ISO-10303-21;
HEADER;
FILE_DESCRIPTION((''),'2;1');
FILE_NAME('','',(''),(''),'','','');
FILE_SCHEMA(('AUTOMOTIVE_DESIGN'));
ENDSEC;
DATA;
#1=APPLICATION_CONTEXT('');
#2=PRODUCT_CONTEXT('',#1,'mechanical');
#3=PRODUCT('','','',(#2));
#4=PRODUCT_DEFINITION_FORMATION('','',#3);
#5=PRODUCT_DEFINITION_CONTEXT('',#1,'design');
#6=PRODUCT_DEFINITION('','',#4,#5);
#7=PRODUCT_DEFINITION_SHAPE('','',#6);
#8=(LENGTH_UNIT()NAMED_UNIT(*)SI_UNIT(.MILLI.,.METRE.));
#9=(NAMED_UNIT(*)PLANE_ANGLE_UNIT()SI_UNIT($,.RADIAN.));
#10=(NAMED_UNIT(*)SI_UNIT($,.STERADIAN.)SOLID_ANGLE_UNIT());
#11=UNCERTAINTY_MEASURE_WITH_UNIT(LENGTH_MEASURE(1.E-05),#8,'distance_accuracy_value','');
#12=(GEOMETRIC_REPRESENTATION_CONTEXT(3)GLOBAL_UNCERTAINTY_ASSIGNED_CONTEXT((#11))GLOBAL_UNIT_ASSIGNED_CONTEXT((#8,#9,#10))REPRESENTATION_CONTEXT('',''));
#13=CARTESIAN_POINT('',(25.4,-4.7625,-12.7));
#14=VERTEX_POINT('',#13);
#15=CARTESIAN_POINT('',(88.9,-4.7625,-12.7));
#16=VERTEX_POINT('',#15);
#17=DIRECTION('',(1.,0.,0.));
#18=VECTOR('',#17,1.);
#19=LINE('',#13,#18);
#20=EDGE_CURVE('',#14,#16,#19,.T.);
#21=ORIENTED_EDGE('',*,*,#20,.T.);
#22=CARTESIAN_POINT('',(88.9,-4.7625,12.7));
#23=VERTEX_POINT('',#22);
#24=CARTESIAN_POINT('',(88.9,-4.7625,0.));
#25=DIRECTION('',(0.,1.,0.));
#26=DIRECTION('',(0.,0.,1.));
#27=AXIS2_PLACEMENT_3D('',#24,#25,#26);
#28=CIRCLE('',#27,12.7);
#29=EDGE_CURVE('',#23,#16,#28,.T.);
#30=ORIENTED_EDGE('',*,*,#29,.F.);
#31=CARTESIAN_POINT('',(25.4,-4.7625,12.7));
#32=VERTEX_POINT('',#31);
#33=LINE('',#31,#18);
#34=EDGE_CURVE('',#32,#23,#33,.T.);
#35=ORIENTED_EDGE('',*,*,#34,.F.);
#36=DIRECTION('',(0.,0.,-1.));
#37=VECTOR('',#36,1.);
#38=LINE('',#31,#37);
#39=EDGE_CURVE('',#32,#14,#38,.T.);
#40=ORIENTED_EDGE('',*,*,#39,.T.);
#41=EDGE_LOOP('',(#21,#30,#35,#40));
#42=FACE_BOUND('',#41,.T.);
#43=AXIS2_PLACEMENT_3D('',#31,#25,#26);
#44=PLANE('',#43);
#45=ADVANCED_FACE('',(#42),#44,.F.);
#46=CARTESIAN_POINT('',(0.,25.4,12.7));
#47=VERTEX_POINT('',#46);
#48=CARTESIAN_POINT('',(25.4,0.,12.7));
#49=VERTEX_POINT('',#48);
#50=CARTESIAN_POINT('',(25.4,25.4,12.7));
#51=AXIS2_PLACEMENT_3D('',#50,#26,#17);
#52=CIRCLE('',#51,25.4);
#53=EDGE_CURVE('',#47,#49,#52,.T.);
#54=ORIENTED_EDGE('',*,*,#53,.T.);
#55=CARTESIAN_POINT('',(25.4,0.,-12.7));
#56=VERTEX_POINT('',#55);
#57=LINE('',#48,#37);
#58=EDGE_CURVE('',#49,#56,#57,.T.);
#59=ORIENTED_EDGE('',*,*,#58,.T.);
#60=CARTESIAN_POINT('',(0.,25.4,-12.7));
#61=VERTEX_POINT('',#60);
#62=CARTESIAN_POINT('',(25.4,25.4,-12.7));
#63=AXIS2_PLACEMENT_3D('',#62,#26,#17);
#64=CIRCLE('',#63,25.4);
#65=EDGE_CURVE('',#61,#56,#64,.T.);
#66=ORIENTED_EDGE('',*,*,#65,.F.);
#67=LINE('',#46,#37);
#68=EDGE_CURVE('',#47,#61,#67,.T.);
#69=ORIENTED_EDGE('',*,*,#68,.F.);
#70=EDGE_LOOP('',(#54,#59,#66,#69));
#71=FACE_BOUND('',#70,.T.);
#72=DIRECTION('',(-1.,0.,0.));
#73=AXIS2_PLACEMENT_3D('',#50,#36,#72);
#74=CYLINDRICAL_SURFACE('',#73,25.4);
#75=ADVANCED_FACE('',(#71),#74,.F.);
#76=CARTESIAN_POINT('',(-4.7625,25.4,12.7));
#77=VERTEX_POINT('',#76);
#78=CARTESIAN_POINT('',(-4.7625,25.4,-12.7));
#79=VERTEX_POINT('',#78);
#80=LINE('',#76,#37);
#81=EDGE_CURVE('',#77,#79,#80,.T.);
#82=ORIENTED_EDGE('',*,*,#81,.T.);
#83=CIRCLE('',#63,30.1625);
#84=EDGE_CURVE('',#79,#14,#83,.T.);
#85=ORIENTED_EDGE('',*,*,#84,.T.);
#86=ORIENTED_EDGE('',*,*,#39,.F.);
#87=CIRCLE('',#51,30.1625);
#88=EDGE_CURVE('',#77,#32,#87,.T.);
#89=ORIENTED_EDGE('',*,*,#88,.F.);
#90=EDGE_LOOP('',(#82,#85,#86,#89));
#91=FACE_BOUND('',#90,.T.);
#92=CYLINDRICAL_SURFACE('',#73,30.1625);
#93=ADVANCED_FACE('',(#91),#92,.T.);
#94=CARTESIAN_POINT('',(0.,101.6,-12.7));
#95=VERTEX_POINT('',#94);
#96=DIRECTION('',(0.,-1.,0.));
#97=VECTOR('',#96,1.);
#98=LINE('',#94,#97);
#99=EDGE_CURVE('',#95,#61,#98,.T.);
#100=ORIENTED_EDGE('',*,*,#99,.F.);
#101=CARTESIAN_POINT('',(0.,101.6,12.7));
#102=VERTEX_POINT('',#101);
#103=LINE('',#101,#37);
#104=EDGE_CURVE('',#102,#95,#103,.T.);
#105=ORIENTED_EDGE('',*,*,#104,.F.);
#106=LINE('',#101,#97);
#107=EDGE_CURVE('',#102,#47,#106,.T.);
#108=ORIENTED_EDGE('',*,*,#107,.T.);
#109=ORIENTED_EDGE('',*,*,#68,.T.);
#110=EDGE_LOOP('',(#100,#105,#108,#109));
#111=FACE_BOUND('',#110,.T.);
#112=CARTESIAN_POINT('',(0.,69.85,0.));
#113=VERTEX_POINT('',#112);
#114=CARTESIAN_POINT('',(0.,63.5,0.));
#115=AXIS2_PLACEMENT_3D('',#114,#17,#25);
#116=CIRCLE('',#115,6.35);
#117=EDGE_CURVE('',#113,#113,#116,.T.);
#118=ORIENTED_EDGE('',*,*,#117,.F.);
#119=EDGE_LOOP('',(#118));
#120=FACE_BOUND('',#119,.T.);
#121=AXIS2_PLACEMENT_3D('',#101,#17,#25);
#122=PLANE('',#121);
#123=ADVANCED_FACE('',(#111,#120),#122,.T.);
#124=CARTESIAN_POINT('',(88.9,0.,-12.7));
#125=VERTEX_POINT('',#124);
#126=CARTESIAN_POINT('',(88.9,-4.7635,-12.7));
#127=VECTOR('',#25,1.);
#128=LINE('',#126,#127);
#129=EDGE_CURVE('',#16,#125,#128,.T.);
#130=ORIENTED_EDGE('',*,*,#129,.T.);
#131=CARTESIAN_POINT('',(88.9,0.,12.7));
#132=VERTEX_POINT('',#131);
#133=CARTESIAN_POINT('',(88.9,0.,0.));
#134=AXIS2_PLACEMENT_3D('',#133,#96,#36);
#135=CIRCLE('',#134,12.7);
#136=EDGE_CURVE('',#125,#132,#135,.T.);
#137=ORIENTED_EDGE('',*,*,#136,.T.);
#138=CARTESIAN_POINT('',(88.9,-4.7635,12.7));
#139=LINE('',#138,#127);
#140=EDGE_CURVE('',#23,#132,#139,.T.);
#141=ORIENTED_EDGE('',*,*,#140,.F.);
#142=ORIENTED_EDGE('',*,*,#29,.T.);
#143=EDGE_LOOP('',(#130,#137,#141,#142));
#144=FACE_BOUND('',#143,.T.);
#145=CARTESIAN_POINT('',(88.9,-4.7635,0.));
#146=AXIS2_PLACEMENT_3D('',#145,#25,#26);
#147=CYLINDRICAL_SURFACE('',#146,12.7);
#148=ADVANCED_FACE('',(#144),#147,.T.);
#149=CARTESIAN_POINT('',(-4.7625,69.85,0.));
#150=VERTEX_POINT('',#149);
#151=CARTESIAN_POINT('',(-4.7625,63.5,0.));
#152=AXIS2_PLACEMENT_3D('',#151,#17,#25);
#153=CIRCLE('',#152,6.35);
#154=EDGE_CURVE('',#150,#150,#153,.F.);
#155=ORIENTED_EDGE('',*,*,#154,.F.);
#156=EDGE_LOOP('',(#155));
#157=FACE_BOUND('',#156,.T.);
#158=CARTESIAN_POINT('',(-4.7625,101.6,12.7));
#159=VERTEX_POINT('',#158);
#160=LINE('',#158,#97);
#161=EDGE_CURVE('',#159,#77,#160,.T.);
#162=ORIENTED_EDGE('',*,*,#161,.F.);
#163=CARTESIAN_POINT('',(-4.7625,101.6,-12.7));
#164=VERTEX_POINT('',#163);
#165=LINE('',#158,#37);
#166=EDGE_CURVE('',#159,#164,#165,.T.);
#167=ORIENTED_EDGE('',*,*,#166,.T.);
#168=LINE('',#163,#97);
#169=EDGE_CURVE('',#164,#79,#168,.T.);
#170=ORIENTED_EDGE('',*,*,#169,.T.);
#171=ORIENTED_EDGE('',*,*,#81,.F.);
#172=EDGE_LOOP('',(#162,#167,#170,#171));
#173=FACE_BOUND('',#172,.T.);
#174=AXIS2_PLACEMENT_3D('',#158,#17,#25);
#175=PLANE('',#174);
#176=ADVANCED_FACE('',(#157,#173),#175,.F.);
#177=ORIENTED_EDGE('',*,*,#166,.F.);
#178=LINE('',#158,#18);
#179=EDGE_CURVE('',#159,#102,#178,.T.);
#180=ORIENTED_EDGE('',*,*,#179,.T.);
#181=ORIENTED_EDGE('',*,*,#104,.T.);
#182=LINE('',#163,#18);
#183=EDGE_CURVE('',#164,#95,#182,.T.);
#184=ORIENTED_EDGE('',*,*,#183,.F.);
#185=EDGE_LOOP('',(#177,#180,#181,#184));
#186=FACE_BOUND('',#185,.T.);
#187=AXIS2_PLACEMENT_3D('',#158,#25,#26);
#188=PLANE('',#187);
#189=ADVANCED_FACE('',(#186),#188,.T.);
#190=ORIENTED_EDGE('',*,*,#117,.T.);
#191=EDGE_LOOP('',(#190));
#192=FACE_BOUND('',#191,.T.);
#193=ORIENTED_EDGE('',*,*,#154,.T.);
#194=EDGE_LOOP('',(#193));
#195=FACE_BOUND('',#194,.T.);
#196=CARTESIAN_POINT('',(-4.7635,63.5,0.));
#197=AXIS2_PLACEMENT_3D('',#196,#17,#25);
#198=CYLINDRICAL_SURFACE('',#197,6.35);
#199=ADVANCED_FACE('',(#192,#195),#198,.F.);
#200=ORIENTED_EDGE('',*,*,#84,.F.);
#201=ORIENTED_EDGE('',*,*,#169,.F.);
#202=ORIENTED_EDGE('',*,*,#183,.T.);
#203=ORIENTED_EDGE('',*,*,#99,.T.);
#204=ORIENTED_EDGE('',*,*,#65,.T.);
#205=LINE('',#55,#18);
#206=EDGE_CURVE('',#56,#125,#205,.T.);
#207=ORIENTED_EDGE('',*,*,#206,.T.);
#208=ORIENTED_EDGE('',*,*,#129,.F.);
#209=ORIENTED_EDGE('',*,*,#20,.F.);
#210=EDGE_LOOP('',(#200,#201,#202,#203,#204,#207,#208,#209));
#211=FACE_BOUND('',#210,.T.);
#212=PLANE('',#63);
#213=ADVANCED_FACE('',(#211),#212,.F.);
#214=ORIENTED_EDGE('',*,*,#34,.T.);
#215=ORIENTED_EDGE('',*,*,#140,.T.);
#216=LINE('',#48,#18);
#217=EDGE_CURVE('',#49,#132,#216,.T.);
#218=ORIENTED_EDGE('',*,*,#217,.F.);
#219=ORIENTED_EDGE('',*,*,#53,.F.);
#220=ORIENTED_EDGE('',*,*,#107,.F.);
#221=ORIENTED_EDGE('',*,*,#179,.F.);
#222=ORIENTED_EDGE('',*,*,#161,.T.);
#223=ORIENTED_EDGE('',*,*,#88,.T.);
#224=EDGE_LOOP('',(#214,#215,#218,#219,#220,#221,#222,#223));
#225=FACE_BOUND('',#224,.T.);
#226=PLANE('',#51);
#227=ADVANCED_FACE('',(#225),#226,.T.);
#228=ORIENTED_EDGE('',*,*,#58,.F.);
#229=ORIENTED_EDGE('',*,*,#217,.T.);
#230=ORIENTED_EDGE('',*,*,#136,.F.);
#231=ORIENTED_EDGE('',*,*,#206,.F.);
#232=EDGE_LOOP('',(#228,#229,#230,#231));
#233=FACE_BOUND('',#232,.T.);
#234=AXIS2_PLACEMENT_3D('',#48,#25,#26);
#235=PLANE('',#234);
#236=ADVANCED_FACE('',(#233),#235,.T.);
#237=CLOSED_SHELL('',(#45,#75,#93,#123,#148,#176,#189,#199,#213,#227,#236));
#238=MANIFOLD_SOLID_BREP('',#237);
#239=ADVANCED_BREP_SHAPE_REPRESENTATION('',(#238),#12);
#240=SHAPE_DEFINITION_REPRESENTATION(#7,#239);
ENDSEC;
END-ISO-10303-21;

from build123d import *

# Parameters (mm, degrees)
EXTRUDE_THIN1_DEPTH      = 12.7
EXTRUDE_THIN1_DEPTH_BACK = 12.7
CUT_EXTRUDE1_DEPTH       = 4.7625
CUT_EXTRUDE2_REACH       = 146.244
SKETCH3_R                = 6.35


with BuildPart() as part:
    # Sketch1 → Extrude-Thin1 (new, two sides: drawn at the far end of the back side and taken through both)
    with BuildSketch(Plane.XY.offset(-EXTRUDE_THIN1_DEPTH_BACK)):
        with BuildLine():
            Line((0, 101.6), (0, 25.4))
            ThreePointArc((0, 25.4), (7.439487758, 7.439487758), (25.4, 0))
            Line((25.4, 0), (101.6, 0))
            Line((101.6, 0), (101.6, -4.7625))
            Line((101.6, -4.7625), (25.4, -4.7625))
            ThreePointArc((25.4, -4.7625), (4.071891712, 4.071891712), (-4.7625, 25.4))
            Line((-4.7625, 25.4), (-4.7625, 101.6))
            Line((-4.7625, 101.6), (0, 101.6))
        make_face()
    extrude(amount=EXTRUDE_THIN1_DEPTH + EXTRUDE_THIN1_DEPTH_BACK)

    # Sketch2 → Cut-Extrude1 (cut)
    with BuildSketch(Plane(origin=(0, 0, 0), x_dir=(-1, 0, 0), z_dir=(0, 1, 0))):
        with BuildLine():
            Line((-88.9, 12.7), (-88.9, 23.152683053))
            Line((-88.9, 23.152683053), (-107.491491885, 23.152683053))
            Line((-107.491491885, 23.152683053), (-107.491491885, -20.225178662))
            Line((-107.491491885, -20.225178662), (-88.9, -20.225178662))
            Line((-88.9, -20.225178662), (-88.9, -12.7))
            ThreePointArc((-88.9, -12.7), (-101.6, 0), (-88.9, 12.7))
        make_face()
    extrude(amount=-CUT_EXTRUDE1_DEPTH, mode=Mode.SUBTRACT)

    # Sketch3 → Cut-Extrude2 (cut, up to next)
    with BuildSketch(Plane(origin=(0, 0, 0), x_dir=(0, 0, -1), z_dir=(1, 0, 0)), mode=Mode.PRIVATE) as cut_extrude2_sk1:
        with Locations(Location((0, 63.5, 0), (0, 0, 90))):
            Circle(SKETCH3_R)
    cut_extrude2_tool1 = extrude(cut_extrude2_sk1.sketch, amount=-CUT_EXTRUDE2_REACH, mode=Mode.PRIVATE) & part.part
    add(cut_extrude2_tool1.solids().sort_by_distance((0, 63.5, 0))[0], mode=Mode.SUBTRACT)


solid = part.part
